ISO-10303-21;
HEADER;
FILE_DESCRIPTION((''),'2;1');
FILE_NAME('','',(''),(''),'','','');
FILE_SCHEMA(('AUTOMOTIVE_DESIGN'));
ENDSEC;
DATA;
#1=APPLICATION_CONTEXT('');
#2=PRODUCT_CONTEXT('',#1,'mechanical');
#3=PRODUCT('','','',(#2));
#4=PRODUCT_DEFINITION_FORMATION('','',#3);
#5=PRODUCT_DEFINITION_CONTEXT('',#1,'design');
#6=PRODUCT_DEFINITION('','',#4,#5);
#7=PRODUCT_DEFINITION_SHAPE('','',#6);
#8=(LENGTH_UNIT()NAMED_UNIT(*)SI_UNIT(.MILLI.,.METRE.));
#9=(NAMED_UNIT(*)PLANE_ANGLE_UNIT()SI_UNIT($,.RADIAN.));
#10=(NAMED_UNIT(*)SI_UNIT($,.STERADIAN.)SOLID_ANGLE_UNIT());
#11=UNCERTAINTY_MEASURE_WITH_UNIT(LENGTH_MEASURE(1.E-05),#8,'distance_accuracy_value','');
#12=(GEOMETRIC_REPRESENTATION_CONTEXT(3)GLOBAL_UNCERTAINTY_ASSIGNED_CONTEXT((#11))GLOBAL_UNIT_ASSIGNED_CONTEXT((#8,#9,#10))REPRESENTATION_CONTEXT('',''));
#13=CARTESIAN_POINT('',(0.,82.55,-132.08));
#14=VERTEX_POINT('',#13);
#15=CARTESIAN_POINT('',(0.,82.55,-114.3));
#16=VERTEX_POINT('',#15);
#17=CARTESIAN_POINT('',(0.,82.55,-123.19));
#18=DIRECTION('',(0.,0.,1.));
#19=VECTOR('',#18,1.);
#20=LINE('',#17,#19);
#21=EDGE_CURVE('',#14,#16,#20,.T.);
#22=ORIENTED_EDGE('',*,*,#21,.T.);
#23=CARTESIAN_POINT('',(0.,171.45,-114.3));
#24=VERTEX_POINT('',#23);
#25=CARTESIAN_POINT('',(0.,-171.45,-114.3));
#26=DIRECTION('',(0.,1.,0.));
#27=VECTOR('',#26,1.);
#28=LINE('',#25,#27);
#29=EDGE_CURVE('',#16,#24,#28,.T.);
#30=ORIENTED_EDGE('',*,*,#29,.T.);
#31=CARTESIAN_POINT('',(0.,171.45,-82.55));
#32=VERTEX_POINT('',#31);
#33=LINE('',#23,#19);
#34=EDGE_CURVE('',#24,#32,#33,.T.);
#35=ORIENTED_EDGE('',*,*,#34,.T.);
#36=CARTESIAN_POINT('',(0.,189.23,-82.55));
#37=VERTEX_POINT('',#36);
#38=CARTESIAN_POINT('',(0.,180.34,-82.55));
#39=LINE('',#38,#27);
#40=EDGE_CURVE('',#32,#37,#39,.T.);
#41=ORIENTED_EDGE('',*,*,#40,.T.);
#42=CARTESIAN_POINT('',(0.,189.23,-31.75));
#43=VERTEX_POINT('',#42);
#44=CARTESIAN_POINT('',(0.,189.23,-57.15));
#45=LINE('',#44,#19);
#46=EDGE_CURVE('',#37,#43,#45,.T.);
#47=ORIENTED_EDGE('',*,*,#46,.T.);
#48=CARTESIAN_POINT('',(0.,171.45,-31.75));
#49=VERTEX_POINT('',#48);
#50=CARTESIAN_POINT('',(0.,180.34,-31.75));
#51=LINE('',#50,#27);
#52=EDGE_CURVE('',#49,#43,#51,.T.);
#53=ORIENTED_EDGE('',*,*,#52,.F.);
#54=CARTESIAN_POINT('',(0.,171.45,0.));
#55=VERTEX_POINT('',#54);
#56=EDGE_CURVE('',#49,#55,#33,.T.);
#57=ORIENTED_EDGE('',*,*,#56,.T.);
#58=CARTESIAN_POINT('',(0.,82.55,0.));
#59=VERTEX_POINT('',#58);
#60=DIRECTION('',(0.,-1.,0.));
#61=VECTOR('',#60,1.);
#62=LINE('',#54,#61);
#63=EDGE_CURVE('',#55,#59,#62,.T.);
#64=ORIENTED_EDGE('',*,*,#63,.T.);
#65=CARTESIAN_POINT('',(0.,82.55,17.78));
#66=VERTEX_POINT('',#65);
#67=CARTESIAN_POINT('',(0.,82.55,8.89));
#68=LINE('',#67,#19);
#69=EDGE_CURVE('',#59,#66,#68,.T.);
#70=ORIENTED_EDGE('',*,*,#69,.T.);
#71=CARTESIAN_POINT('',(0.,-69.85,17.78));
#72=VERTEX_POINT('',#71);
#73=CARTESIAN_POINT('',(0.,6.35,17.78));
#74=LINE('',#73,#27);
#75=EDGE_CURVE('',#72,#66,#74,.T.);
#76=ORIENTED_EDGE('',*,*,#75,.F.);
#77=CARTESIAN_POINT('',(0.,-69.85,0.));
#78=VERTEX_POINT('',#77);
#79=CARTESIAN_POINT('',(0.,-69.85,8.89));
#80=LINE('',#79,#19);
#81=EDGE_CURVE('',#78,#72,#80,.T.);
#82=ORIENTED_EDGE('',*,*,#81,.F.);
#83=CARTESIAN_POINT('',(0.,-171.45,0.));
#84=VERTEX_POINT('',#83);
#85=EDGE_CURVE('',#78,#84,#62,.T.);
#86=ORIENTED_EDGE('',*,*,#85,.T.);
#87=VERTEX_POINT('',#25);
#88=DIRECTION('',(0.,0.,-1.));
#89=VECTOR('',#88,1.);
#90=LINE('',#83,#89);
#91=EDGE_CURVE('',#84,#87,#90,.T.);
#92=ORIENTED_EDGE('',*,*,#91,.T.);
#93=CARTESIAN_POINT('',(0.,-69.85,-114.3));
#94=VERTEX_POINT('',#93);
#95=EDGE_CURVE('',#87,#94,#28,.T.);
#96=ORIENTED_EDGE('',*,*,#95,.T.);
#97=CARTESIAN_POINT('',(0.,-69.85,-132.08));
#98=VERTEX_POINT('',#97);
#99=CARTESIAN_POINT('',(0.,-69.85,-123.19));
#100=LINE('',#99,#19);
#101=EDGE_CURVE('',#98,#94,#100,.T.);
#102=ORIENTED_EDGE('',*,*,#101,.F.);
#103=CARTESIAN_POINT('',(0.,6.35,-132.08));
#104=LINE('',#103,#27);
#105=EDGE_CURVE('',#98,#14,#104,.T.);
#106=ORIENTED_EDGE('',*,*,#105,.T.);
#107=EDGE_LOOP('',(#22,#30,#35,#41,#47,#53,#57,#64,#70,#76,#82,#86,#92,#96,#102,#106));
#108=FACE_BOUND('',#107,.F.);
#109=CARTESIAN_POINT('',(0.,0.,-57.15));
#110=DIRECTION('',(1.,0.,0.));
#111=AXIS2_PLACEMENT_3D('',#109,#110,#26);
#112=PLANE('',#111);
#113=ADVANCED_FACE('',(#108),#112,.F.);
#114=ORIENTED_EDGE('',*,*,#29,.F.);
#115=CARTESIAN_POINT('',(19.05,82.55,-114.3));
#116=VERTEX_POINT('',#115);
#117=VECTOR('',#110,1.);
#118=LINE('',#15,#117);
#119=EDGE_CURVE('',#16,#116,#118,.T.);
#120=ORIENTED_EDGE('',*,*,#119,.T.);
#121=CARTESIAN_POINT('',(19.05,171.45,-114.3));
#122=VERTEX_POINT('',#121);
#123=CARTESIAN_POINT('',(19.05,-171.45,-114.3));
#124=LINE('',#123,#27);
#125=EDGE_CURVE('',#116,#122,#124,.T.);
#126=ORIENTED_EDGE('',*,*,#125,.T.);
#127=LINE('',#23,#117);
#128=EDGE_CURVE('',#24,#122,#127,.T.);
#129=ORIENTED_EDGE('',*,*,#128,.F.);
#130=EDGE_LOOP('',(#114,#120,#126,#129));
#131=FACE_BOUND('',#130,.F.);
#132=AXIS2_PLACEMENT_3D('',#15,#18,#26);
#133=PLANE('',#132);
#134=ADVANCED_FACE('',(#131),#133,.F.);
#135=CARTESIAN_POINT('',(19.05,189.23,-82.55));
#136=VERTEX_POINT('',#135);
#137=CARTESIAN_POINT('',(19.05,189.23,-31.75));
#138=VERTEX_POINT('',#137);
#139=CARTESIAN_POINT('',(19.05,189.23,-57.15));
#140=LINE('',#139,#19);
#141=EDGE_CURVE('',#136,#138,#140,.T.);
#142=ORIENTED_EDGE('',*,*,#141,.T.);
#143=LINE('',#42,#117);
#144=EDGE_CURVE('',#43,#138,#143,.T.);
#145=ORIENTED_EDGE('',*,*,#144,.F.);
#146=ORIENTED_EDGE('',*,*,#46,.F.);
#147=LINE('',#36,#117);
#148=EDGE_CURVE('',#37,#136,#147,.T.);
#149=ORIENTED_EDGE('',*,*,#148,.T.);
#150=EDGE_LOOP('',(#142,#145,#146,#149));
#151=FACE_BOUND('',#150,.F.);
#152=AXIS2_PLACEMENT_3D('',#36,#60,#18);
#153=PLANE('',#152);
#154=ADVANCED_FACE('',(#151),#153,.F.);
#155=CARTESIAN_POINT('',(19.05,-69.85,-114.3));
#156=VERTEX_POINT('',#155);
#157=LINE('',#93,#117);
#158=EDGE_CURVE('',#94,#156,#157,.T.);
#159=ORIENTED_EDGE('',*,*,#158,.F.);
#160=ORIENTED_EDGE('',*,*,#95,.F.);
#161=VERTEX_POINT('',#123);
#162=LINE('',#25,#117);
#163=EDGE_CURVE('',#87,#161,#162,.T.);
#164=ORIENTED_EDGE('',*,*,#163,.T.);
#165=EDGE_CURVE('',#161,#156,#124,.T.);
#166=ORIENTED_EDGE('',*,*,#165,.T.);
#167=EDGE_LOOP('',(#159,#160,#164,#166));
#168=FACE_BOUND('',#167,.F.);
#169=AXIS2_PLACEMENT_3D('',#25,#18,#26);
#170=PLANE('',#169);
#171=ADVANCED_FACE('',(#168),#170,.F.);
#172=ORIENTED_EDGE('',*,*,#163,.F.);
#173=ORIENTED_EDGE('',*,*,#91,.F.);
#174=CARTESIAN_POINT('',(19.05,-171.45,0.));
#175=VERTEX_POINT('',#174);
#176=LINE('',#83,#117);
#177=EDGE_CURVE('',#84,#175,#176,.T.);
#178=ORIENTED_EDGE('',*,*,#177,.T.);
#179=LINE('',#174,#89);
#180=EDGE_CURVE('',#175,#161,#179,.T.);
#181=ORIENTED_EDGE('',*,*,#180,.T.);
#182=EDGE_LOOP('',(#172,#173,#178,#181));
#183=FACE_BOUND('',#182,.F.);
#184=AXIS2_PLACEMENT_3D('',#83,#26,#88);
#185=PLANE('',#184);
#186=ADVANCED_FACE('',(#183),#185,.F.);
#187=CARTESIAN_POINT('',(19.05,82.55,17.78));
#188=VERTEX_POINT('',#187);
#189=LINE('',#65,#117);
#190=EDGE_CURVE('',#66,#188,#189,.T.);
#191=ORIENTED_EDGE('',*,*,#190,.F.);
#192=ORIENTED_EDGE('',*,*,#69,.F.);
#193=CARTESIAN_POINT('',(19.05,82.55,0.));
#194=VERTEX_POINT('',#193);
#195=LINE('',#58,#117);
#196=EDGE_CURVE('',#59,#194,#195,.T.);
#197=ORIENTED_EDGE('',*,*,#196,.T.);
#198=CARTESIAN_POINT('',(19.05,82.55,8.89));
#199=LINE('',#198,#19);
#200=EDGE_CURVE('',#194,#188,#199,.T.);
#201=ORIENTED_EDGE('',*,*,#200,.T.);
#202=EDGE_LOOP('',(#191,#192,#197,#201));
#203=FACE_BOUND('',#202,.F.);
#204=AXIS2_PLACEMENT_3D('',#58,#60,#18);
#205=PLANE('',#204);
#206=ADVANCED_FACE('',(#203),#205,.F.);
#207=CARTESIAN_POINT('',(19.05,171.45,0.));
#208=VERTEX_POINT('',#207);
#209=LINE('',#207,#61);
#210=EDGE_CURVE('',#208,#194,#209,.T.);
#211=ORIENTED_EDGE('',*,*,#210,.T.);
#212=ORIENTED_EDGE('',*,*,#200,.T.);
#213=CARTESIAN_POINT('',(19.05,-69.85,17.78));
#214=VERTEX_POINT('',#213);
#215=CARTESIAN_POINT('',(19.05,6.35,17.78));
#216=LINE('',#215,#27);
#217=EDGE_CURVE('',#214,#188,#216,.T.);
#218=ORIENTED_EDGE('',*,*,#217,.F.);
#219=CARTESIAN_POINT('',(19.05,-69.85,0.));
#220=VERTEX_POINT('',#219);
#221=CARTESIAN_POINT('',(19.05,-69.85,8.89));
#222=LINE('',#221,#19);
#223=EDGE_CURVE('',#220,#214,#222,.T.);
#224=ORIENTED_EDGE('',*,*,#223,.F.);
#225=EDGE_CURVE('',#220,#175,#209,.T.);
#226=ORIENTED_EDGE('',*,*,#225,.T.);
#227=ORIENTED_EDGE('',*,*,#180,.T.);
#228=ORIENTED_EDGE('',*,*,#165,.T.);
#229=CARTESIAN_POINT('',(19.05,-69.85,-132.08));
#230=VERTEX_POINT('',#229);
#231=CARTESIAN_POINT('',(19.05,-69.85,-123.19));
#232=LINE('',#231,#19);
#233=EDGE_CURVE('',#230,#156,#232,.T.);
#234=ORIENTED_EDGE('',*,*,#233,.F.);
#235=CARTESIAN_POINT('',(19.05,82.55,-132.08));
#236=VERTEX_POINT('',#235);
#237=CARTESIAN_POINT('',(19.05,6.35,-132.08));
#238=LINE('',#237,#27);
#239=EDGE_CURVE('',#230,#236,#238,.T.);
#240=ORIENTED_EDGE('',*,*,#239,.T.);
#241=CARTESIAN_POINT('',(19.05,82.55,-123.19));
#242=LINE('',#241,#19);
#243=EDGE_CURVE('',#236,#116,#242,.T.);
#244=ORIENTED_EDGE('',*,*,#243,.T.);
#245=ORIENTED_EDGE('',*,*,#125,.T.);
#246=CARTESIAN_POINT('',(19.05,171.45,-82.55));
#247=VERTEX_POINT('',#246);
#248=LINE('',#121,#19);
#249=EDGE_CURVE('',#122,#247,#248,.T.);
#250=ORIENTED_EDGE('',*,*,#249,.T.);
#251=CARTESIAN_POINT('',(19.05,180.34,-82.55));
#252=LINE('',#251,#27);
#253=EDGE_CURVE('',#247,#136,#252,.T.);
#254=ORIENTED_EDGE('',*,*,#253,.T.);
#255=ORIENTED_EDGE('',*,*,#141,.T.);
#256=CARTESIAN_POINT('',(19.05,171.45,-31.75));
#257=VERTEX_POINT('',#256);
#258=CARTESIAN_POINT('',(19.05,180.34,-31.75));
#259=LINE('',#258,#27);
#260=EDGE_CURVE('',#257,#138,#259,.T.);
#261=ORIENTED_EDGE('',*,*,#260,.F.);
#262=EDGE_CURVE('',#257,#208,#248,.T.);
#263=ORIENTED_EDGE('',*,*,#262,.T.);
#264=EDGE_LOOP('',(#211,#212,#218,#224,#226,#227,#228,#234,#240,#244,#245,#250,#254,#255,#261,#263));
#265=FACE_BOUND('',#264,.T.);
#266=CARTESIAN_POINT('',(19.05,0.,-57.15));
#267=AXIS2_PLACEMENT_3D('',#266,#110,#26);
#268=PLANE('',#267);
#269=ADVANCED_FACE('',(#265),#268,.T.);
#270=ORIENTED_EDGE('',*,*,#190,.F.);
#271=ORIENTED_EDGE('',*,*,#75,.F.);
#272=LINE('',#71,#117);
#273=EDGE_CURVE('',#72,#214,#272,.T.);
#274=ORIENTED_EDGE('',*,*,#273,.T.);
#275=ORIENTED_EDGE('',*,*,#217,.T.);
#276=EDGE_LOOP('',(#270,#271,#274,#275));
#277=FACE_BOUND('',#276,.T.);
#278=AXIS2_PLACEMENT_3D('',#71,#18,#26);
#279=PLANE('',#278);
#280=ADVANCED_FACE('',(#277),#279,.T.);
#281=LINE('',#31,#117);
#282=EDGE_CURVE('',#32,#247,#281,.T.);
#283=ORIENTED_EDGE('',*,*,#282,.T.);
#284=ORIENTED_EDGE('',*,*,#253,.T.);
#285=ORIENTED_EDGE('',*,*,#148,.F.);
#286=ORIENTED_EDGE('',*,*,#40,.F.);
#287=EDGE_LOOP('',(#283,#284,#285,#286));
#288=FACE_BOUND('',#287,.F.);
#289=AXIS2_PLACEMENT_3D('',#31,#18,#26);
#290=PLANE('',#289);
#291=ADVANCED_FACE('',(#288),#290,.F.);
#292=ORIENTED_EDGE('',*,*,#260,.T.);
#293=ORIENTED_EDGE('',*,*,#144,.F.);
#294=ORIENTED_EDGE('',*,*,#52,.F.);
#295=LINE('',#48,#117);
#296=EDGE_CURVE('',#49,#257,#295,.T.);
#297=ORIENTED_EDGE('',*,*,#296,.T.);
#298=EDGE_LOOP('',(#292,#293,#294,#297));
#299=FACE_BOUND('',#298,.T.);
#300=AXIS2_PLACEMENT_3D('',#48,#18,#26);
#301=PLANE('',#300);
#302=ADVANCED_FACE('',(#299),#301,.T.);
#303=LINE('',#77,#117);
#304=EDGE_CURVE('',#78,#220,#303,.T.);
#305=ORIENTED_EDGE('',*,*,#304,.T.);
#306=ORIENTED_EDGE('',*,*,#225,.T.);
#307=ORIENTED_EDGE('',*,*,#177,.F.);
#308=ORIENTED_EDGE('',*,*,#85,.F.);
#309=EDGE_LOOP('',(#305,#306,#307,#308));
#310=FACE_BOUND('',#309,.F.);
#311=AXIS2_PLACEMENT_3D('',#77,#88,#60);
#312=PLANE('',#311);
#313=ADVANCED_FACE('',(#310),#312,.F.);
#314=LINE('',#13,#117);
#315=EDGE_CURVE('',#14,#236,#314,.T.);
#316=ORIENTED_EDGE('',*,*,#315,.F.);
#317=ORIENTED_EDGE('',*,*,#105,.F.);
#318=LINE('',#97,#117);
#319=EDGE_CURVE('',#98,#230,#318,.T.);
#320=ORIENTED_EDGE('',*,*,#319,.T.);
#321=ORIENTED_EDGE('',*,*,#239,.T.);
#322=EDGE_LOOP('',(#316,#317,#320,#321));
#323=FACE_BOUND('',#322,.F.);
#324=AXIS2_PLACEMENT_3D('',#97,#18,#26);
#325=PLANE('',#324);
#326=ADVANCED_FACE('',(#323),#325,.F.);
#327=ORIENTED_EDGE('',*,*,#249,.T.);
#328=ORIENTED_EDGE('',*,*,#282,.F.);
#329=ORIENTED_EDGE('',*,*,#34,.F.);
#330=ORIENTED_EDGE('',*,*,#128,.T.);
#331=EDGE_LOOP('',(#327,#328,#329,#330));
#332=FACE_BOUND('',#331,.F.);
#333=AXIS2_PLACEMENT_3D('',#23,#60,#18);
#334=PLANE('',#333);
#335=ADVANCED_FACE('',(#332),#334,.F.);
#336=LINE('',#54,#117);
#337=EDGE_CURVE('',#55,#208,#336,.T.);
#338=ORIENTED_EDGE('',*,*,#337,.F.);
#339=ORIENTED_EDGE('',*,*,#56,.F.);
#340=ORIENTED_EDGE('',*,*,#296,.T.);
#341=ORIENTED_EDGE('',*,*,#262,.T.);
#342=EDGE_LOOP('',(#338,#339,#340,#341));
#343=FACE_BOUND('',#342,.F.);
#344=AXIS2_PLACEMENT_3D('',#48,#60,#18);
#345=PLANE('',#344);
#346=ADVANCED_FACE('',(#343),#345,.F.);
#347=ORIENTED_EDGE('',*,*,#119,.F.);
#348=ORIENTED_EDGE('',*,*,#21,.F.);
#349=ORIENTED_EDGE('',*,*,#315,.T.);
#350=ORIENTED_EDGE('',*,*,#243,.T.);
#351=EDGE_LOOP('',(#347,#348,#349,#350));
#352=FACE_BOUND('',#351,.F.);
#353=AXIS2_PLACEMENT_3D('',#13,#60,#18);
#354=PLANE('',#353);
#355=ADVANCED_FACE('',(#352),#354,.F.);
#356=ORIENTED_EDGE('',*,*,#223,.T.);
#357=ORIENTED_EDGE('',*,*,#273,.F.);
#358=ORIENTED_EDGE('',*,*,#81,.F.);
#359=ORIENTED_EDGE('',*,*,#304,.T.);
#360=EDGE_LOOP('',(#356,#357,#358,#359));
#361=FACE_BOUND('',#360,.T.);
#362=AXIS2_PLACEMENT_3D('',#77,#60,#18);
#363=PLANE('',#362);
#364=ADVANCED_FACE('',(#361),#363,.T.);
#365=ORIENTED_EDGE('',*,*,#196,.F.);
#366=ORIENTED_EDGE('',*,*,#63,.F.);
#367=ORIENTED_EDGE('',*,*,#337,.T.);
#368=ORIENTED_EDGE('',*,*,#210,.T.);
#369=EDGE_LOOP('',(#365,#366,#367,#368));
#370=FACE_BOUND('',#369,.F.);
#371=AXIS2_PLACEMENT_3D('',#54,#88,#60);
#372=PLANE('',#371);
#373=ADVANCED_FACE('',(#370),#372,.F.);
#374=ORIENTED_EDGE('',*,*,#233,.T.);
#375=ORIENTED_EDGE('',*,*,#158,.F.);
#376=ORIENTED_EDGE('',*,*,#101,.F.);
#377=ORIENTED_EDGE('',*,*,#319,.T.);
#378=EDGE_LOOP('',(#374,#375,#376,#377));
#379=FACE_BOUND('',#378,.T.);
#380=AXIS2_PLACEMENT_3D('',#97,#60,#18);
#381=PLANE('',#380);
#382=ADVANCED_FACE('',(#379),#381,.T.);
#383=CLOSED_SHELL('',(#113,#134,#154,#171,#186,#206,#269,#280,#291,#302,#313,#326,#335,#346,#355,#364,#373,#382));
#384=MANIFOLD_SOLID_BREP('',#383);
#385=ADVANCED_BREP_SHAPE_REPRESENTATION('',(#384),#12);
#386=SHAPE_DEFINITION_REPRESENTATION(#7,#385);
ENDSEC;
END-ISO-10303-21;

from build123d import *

# Parameters (mm, degrees)
F0_W     = 152.4
F0_H     = 17.78
F0_W_2   = 17.78
F0_H_2   = 50.8
F1_DEPTH = 19.05


# Not quite as in the source:
# - a feature names something its author has since deleted; it is built from what else it names


with BuildPart() as f1:
    # F0 (on Right) → F1 (new body)
    with BuildSketch(Plane.YZ):
        Polygon((-69.85, 0), (-171.45, 0), (-171.45, -114.3), (-69.85, -114.3), (82.55, -114.3), (171.45, -114.3), (171.45, -82.55), (171.45, -31.75), (171.45, 0), (82.55, 0), align=None)
        with Locations((6.35, -123.19)):
            Rectangle(F0_W, F0_H)
        with Locations((180.34, -57.15)):
            Rectangle(F0_W_2, F0_H_2)
        with Locations((6.35, 8.89)):
            Rectangle(F0_W, F0_H)
    extrude(amount=F1_DEPTH)


solid = f1.part
